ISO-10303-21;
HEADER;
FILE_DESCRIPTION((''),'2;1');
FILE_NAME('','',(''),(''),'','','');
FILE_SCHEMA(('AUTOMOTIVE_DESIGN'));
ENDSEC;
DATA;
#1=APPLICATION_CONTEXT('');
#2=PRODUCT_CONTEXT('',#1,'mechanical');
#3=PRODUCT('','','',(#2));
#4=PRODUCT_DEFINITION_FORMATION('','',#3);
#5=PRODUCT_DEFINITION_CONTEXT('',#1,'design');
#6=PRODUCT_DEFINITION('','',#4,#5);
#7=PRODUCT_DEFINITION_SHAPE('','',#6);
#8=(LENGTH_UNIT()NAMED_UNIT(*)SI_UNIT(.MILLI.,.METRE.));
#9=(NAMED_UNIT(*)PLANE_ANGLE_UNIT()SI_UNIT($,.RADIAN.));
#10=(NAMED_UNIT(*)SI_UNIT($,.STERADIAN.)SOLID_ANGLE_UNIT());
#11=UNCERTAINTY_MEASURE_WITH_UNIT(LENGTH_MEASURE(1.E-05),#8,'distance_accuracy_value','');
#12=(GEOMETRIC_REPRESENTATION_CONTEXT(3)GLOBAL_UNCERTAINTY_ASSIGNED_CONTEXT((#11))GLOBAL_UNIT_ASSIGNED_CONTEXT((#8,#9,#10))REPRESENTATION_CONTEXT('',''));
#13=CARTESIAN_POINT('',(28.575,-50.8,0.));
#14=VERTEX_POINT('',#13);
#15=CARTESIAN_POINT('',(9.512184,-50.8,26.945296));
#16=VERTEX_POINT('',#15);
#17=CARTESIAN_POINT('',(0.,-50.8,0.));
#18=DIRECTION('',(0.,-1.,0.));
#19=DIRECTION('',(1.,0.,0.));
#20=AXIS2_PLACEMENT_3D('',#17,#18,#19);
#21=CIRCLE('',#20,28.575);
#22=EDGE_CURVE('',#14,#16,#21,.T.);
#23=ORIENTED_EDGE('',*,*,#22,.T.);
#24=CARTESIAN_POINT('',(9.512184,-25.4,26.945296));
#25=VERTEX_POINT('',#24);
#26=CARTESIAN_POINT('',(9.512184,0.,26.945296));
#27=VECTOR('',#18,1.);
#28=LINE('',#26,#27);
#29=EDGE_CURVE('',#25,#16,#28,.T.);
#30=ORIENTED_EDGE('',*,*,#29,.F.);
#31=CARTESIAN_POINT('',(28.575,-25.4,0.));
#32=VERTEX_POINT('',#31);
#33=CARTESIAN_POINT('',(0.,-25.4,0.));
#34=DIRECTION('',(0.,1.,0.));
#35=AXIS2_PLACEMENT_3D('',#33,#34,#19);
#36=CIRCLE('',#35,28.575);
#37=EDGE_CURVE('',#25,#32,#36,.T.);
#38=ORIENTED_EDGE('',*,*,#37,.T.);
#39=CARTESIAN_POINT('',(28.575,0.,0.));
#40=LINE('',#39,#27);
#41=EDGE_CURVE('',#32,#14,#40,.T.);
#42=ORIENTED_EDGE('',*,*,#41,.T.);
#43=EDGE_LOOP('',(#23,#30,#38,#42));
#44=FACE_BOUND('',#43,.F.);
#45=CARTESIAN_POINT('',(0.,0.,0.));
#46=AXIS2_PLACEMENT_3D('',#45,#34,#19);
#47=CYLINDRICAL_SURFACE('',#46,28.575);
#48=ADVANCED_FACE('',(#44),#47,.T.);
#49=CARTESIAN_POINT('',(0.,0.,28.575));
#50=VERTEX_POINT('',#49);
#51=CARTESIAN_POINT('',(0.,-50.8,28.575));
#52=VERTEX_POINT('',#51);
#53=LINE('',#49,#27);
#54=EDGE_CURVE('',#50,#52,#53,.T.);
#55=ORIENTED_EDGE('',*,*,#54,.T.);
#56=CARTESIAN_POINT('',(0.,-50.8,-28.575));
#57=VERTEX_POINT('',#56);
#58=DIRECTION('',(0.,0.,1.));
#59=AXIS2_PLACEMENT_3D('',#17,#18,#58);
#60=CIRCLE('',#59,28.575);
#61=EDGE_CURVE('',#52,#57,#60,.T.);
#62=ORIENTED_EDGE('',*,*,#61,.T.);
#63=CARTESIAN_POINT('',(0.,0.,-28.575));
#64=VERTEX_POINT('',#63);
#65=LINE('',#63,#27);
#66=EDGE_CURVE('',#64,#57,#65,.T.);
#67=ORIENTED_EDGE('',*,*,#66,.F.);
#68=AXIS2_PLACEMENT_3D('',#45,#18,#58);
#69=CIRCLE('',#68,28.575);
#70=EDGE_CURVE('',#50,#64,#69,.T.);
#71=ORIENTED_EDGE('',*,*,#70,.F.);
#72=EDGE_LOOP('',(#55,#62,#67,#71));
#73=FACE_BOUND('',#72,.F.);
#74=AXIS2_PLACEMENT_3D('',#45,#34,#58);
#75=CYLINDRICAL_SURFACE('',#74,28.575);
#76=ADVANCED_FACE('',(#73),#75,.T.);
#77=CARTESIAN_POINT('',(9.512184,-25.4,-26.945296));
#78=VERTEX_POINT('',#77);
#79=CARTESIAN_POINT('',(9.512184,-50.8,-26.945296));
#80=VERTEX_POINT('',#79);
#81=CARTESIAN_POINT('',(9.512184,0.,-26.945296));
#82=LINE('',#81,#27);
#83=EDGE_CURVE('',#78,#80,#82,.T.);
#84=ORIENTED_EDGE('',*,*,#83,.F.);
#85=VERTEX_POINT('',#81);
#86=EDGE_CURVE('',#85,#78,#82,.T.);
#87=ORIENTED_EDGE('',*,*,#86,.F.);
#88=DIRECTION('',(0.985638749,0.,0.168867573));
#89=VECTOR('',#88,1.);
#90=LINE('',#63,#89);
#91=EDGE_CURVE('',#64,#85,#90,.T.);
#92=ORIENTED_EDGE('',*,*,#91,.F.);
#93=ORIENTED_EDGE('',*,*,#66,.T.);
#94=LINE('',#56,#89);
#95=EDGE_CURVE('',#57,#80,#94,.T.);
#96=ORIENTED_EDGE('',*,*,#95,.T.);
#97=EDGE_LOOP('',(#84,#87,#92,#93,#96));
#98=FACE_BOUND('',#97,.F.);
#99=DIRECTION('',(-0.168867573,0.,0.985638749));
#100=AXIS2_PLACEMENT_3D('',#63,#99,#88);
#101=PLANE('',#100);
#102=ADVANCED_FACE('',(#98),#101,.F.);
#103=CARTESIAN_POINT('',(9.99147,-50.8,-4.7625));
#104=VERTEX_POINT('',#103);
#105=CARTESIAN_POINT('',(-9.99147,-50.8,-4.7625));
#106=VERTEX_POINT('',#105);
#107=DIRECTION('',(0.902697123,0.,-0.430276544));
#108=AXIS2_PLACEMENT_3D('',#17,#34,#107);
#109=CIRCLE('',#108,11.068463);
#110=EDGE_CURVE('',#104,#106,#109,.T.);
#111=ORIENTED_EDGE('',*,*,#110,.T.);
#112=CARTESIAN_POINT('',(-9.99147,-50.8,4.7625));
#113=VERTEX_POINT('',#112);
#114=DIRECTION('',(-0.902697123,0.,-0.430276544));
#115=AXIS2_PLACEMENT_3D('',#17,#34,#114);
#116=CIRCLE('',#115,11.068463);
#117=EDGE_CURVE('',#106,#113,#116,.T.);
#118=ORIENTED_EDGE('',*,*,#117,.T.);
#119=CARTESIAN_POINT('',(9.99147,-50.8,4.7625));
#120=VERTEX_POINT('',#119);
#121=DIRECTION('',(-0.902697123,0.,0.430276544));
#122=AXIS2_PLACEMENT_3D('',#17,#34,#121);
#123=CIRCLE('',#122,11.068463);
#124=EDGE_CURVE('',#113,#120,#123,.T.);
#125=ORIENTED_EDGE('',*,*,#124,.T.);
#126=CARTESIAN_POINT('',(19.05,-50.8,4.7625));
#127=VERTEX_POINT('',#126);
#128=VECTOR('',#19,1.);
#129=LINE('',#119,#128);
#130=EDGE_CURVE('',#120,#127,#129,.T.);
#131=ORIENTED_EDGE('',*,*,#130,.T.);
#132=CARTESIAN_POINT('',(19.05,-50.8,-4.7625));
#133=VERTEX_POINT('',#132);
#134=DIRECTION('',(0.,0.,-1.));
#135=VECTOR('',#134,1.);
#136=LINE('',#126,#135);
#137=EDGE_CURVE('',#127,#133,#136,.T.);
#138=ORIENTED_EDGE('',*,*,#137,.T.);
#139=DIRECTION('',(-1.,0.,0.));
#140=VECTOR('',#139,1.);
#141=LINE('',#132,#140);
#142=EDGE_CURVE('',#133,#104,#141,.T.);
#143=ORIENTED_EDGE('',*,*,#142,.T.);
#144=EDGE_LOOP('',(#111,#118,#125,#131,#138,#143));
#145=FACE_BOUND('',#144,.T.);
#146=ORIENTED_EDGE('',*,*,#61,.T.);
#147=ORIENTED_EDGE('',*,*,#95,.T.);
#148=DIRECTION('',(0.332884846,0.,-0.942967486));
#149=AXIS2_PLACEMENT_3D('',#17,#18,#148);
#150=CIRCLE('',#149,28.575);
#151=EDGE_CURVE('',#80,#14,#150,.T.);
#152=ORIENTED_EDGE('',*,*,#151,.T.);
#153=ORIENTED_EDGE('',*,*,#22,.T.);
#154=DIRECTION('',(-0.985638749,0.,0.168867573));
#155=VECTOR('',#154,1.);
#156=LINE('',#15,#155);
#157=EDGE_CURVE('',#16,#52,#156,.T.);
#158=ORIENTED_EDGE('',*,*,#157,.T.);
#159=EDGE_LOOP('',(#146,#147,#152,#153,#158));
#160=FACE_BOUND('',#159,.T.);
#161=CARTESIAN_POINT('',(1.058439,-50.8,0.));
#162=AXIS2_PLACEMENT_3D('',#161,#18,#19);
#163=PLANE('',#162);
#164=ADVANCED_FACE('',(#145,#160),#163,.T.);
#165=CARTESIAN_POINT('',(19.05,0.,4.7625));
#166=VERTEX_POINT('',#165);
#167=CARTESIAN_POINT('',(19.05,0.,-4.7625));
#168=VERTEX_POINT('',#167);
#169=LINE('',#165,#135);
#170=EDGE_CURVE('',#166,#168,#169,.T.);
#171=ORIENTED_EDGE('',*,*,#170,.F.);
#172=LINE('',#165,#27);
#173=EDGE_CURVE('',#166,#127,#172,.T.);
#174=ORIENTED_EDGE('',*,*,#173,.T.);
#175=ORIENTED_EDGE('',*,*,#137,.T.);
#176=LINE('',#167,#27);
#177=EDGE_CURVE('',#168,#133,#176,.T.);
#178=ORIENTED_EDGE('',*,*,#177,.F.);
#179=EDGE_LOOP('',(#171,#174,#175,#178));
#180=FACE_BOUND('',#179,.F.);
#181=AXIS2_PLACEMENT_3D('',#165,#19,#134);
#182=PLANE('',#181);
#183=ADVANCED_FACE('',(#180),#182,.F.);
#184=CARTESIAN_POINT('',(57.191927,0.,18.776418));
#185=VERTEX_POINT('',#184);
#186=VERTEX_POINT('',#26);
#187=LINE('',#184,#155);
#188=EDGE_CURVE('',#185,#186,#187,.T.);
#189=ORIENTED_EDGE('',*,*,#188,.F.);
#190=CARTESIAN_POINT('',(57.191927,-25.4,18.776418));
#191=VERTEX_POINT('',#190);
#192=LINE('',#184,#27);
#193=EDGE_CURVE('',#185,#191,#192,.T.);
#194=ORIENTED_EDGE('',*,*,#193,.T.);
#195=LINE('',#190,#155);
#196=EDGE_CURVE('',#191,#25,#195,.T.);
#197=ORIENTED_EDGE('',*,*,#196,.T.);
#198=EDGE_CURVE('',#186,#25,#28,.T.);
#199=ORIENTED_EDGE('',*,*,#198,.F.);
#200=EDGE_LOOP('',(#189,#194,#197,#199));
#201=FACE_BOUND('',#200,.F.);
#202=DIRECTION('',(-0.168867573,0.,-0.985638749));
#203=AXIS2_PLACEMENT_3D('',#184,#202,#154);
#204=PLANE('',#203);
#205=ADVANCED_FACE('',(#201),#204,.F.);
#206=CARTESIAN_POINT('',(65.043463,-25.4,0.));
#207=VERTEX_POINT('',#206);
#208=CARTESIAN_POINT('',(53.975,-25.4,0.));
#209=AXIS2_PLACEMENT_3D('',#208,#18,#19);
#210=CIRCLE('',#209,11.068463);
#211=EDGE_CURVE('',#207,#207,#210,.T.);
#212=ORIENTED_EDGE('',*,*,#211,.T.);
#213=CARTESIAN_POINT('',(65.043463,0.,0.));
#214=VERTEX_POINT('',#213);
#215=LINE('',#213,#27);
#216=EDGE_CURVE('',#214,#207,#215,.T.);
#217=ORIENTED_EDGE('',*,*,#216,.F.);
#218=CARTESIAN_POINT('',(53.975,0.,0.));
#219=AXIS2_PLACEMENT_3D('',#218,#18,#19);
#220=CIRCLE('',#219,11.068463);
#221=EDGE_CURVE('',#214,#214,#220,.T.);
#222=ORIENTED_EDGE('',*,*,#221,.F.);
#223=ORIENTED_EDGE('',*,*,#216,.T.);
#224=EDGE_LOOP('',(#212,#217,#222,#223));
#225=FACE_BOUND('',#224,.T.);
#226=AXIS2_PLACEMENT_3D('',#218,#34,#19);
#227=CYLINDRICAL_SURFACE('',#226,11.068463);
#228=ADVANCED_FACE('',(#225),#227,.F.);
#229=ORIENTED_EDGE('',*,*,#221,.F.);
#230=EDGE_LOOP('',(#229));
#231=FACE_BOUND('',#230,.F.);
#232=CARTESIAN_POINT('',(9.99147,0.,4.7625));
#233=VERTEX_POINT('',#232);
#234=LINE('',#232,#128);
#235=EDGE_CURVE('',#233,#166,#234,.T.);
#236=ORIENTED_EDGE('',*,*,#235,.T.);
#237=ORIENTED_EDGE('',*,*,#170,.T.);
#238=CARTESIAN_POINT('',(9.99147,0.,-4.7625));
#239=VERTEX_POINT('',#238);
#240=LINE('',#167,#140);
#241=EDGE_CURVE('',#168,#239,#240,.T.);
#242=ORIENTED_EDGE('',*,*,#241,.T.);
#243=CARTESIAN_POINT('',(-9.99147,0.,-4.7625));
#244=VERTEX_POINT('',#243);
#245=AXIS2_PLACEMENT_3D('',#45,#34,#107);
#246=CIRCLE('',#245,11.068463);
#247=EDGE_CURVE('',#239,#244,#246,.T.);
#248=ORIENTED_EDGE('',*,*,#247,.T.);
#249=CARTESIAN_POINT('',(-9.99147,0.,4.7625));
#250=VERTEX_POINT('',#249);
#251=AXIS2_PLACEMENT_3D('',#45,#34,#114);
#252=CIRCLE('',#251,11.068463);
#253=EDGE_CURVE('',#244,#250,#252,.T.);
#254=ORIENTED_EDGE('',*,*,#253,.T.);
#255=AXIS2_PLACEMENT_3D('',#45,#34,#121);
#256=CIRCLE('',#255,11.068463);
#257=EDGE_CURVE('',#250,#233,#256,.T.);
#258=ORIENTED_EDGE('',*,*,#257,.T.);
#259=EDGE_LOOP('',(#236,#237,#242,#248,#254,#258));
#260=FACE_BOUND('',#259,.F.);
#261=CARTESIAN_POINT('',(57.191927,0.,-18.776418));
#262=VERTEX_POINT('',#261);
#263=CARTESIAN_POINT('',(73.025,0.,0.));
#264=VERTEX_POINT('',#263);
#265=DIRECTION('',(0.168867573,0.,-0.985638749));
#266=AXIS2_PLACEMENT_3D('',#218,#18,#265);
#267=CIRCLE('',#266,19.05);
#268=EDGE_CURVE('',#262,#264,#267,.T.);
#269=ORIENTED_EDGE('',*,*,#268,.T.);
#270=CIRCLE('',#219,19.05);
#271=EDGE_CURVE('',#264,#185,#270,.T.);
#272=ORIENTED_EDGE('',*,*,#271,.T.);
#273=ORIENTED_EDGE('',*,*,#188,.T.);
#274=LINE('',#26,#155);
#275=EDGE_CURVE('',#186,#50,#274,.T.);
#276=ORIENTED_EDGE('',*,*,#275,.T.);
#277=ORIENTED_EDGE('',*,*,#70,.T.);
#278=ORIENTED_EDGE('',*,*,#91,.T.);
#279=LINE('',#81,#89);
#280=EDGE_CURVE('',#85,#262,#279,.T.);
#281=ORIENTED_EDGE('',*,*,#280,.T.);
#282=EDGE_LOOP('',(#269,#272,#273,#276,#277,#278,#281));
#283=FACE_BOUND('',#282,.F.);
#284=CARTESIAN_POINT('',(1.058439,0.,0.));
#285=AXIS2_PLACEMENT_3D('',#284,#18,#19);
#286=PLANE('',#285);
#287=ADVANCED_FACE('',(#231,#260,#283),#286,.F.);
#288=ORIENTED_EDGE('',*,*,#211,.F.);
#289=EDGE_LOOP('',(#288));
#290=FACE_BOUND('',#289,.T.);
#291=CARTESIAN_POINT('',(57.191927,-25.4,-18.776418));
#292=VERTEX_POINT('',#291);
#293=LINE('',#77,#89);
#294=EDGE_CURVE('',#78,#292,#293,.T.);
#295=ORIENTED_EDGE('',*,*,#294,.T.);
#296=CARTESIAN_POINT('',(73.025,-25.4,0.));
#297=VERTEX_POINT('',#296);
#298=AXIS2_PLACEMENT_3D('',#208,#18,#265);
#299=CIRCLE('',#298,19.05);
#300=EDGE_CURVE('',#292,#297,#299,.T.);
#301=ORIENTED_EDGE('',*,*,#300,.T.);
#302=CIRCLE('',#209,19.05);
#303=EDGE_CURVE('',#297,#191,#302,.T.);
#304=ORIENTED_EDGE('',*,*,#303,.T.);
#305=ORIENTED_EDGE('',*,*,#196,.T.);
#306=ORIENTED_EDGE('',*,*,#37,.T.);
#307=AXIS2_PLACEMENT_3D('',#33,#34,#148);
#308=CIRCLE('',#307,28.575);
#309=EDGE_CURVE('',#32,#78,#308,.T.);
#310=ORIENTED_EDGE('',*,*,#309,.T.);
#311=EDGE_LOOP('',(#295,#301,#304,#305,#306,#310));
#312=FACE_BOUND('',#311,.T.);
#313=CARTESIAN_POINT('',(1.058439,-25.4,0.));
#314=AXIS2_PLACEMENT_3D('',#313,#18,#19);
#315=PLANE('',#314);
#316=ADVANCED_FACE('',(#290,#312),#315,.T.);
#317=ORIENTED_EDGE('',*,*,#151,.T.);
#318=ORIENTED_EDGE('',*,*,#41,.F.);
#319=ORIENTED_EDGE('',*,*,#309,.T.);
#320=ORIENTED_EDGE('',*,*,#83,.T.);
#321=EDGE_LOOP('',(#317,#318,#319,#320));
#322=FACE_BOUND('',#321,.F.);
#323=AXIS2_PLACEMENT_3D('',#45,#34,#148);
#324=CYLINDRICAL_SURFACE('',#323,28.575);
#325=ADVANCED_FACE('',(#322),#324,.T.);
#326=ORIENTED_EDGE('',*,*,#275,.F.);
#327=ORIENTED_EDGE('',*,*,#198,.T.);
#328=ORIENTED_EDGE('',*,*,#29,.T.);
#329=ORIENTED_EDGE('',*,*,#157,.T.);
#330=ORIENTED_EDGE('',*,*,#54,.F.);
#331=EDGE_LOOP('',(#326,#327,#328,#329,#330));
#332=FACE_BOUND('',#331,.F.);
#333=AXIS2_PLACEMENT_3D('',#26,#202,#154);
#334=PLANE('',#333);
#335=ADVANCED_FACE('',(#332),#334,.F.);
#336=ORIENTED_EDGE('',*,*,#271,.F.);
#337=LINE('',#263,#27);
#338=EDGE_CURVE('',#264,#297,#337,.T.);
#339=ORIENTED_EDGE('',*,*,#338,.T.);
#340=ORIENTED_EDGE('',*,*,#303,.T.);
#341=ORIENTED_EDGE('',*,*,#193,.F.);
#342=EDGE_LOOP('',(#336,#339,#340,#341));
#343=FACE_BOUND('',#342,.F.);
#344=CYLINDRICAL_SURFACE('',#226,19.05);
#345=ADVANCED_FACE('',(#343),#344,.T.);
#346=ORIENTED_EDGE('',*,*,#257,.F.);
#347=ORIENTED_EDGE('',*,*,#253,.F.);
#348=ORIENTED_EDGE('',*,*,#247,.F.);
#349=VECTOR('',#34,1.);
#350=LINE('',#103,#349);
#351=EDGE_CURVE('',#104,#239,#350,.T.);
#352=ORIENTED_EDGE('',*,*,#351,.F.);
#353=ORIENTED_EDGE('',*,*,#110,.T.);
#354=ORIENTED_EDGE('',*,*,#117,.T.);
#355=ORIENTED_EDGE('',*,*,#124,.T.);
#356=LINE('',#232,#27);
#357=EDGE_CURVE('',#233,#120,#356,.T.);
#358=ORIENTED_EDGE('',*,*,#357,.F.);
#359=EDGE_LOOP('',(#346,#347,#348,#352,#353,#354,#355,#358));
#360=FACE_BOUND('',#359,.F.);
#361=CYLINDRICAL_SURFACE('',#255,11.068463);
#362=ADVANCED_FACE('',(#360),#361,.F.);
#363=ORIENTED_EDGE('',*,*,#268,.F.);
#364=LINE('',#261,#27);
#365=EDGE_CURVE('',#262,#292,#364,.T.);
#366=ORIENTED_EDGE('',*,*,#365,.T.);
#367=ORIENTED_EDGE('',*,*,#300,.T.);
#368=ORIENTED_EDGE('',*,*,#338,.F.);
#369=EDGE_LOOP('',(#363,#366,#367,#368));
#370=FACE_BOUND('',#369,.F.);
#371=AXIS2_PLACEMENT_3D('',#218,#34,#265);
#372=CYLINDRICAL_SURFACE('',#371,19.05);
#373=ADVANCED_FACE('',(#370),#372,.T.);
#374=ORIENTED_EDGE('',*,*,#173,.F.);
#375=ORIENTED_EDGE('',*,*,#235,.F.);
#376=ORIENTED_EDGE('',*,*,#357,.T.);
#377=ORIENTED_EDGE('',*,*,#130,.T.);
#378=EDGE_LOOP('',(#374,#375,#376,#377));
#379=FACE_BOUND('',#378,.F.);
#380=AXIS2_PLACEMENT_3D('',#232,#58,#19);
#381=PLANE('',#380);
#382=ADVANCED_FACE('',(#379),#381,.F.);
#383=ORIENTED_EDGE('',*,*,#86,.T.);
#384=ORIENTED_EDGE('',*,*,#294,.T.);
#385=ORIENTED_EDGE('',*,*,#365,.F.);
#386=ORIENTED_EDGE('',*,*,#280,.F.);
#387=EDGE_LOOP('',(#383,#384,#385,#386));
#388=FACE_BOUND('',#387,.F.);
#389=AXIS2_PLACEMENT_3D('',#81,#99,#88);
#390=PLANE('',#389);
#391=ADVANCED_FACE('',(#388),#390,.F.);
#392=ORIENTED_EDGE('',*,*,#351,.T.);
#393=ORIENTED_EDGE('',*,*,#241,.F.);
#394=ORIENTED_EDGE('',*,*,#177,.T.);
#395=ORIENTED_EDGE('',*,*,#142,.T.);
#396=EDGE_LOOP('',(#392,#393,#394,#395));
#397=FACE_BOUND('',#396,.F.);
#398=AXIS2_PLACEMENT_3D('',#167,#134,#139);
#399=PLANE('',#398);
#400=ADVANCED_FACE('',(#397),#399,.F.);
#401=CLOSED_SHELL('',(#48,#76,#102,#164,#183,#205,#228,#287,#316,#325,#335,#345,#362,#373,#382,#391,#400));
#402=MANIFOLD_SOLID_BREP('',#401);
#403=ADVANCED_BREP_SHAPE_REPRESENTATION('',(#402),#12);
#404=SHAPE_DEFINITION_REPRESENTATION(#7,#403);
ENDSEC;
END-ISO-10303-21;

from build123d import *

# Parameters (mm, degrees)
F0_R     = 11.06846298
F1_DEPTH = 25.4
F2_DEPTH = 50.8


with BuildPart() as f1:
    # F0 (on Front) → F1 (new body)
    with BuildSketch(Plane.XZ):
        with BuildLine():
            Line((9.5121844836, 26.9452959039), (0, 28.575))
            ThreePointArc((0, 28.575), (-28.575, 0), (0, -28.575))
            Line((0, -28.575), (9.5121844836, -26.9452959039))
            ThreePointArc((9.5121844836, -26.9452959039), (23.3274655355, -16.5033322905), (28.575, 0))
            ThreePointArc((28.575, 0), (23.3274655355, 16.5033322905), (9.5121844836, 26.9452959039))
        make_face()
        with BuildLine():
            ThreePointArc((-9.9914696861, 4.7625), (0, 11.06846298), (9.9914696861, 4.7625))
            Line((9.9914696861, 4.7625), (19.05, 4.7625))
            Line((19.05, 4.7625), (19.05, -4.7625))
            Line((19.05, -4.7625), (9.9914696861, -4.7625))
            ThreePointArc((9.9914696861, -4.7625), (0, -11.06846298), (-9.9914696861, -4.7625))
            Line((-9.9914696861, -4.7625), (-19.05, -4.7625))
            Line((-19.05, -4.7625), (-19.05, 4.7625))
            Line((-19.05, 4.7625), (-9.9914696861, 4.7625))
        make_face(mode=Mode.SUBTRACT)
        with BuildLine():
            Line((57.1919272622, 18.7764181619), (9.5121844836, 26.9452959039))
            ThreePointArc((9.5121844836, 26.9452959039), (23.3274655355, 16.5033322905), (28.575, 0))
            ThreePointArc((28.575, 0), (23.3274655355, -16.5033322905), (9.5121844836, -26.9452959039))
            Line((9.5121844836, -26.9452959039), (57.1919272622, -18.7764181619))
            ThreePointArc((57.1919272622, -18.7764181619), (34.925, 0), (57.1919272622, 18.7764181619))
        make_face()
        with BuildLine():
            ThreePointArc((73.025, 0), (68.5383952831, 12.2804730295), (57.1919272622, 18.7764181619))
            ThreePointArc((57.1919272622, 18.7764181619), (34.925, 0), (57.1919272622, -18.7764181619))
            ThreePointArc((57.1919272622, -18.7764181619), (68.5383952831, -12.2804730295), (73.025, 0))
        make_face()
        with Locations((53.975, 0)):
            Circle(F0_R, mode=Mode.SUBTRACT)
        with BuildLine():
            ThreePointArc((-9.9914696861, -4.7625), (-11.06846298, 0), (-9.9914696861, 4.7625))
            Line((-9.9914696861, 4.7625), (-19.05, 4.7625))
            Line((-19.05, 4.7625), (-19.05, -4.7625))
            Line((-19.05, -4.7625), (-9.9914696861, -4.7625))
        make_face()
    extrude(amount=F1_DEPTH)

    # F0 (on Front) → F2 (join)
    with BuildSketch(Plane.XZ):
        with BuildLine():
            Line((9.5121844836, 26.9452959039), (0, 28.575))
            ThreePointArc((0, 28.575), (-28.575, 0), (0, -28.575))
            Line((0, -28.575), (9.5121844836, -26.9452959039))
            ThreePointArc((9.5121844836, -26.9452959039), (23.3274655355, -16.5033322905), (28.575, 0))
            ThreePointArc((28.575, 0), (23.3274655355, 16.5033322905), (9.5121844836, 26.9452959039))
        make_face()
        with BuildLine():
            ThreePointArc((-9.9914696861, 4.7625), (0, 11.06846298), (9.9914696861, 4.7625))
            Line((9.9914696861, 4.7625), (19.05, 4.7625))
            Line((19.05, 4.7625), (19.05, -4.7625))
            Line((19.05, -4.7625), (9.9914696861, -4.7625))
            ThreePointArc((9.9914696861, -4.7625), (0, -11.06846298), (-9.9914696861, -4.7625))
            Line((-9.9914696861, -4.7625), (-19.05, -4.7625))
            Line((-19.05, -4.7625), (-19.05, 4.7625))
            Line((-19.05, 4.7625), (-9.9914696861, 4.7625))
        make_face(mode=Mode.SUBTRACT)
        with BuildLine():
            ThreePointArc((-9.9914696861, -4.7625), (-11.06846298, 0), (-9.9914696861, 4.7625))
            Line((-9.9914696861, 4.7625), (-19.05, 4.7625))
            Line((-19.05, 4.7625), (-19.05, -4.7625))
            Line((-19.05, -4.7625), (-9.9914696861, -4.7625))
        make_face()
    extrude(amount=F2_DEPTH)


solid = f1.part
